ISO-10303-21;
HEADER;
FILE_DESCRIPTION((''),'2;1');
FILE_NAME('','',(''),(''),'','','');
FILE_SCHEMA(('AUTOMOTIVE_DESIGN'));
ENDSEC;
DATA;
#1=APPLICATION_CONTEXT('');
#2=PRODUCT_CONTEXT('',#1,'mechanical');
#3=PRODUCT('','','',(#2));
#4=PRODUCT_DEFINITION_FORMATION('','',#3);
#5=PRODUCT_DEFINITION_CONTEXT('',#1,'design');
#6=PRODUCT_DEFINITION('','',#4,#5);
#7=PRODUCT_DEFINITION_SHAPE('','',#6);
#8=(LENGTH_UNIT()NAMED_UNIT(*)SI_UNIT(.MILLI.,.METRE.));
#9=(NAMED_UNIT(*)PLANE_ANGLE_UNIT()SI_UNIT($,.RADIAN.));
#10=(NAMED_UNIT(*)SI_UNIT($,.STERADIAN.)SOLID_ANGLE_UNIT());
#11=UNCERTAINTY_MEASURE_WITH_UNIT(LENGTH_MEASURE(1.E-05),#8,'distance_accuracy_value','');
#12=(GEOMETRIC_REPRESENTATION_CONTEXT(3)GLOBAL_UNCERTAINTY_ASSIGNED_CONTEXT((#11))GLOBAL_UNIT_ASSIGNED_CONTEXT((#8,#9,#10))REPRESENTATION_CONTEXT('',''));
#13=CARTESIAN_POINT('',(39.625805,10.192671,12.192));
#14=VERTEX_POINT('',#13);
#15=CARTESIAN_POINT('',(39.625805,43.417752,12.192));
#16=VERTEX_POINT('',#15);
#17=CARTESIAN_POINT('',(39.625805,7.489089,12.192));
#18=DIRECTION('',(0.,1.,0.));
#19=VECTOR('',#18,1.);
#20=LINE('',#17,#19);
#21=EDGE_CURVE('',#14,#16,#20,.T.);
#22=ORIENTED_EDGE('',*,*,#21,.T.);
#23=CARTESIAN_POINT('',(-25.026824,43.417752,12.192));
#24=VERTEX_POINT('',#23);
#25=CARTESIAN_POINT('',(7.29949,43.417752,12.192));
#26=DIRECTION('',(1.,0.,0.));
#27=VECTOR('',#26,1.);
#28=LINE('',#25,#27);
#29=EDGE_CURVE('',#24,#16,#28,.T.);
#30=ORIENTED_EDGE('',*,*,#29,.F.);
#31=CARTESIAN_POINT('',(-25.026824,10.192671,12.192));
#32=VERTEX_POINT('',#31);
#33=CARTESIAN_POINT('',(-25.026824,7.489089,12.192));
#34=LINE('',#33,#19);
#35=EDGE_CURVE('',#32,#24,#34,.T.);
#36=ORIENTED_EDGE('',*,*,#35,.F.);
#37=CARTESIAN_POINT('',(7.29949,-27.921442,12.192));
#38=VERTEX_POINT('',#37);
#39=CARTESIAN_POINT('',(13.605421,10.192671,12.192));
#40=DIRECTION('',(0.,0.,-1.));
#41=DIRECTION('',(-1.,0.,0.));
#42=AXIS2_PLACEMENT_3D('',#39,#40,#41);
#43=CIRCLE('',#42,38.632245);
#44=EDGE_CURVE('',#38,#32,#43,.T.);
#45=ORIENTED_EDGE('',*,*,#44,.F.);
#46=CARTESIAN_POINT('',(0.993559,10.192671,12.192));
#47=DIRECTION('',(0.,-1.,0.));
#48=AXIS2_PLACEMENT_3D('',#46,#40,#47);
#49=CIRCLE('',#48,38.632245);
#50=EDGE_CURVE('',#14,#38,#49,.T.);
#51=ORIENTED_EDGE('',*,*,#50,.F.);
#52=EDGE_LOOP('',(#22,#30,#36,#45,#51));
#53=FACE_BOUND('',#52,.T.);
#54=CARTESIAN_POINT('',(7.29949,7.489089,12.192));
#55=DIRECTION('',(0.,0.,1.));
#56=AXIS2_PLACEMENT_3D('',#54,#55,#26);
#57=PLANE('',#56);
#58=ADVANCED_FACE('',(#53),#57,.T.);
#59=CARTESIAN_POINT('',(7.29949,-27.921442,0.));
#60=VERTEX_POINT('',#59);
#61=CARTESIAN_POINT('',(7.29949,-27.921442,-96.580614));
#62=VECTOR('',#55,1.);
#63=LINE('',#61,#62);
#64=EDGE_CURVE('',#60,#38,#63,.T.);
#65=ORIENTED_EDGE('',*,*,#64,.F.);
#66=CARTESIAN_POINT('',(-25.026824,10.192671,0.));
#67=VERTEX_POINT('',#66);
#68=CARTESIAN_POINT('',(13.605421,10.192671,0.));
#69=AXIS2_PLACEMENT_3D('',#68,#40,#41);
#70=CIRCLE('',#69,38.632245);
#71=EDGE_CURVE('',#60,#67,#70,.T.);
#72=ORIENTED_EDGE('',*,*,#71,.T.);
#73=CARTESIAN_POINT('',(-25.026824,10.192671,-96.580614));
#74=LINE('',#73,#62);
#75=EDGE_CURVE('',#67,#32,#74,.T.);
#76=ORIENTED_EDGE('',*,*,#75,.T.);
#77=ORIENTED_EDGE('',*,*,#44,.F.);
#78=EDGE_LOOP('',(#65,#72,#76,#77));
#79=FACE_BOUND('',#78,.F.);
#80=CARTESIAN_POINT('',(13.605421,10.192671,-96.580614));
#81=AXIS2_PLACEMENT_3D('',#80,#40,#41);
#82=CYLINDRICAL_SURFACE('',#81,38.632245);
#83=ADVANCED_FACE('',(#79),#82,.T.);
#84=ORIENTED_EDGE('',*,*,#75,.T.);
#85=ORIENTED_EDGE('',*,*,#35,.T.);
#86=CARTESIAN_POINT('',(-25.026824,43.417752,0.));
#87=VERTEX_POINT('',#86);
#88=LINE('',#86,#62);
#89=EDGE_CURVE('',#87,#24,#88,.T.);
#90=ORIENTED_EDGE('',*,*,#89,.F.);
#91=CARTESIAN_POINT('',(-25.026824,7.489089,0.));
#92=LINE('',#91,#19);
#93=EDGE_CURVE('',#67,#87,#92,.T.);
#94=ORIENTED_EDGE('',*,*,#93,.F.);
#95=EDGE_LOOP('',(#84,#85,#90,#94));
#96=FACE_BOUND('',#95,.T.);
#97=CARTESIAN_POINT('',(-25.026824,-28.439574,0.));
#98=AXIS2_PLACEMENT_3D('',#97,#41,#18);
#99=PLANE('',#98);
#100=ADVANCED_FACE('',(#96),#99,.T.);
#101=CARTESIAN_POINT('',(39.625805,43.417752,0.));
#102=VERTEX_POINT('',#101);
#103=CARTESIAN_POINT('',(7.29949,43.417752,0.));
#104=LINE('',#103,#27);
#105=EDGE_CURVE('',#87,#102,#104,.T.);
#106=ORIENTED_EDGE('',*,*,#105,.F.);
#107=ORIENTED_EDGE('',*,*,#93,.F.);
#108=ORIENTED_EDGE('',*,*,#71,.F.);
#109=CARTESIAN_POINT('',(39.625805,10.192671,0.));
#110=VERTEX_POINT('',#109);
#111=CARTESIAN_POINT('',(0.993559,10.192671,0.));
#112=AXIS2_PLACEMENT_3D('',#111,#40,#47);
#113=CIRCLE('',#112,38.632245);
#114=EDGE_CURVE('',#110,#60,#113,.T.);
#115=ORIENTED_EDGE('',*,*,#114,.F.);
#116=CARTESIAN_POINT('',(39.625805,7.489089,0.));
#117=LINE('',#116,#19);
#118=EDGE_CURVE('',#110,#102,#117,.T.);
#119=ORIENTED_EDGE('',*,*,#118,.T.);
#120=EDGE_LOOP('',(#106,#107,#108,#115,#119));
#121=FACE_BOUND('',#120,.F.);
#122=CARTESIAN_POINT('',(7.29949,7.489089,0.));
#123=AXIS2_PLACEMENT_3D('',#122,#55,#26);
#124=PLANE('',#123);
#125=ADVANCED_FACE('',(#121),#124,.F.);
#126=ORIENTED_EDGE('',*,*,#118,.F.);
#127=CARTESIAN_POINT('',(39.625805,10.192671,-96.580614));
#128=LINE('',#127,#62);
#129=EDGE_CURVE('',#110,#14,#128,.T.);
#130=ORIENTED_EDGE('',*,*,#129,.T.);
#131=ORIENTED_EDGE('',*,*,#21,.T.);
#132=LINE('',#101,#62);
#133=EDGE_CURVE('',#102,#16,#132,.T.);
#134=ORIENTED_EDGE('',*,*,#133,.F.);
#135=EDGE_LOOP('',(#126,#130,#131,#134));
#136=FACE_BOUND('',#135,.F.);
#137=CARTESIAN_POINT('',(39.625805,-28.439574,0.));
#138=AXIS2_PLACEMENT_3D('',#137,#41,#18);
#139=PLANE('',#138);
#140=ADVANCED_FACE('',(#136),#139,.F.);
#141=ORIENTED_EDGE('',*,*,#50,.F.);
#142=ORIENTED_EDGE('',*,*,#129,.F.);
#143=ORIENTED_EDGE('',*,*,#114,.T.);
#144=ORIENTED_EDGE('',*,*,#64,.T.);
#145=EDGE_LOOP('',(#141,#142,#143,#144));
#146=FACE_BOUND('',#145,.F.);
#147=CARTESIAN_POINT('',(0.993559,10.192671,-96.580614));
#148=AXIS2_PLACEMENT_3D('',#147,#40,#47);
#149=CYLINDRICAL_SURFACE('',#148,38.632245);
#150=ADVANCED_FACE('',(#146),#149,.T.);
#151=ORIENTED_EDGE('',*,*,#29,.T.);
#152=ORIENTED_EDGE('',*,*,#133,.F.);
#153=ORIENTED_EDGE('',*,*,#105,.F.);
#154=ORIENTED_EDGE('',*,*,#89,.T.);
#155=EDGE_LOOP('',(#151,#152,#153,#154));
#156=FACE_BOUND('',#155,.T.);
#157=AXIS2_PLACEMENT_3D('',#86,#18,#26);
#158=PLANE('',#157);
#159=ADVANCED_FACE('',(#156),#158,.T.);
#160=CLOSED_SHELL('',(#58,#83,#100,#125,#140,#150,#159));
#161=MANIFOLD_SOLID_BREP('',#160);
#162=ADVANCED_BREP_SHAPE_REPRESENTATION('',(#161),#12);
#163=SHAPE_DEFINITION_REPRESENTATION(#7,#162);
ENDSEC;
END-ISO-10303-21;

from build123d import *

# Parameters (mm, degrees)
F0_W        = 64.6526291966
F0_H        = 71.8573257327
F1_DEPTH    = 12.192
F2_T1_DEPTH = 205.3532271255


# Not quite as in the source:
# - a fillet or chamfer that OpenCascade refuses, or shapes differently, is made with other operations: its cross-section is extruded or revolved along the edge and cut away or added


with BuildPart() as f1:
    # F0 (on Top) → F1 (new body)
    with BuildSketch(Plane.XY):
        with Locations((7.299490273, 7.4890889227)):
            Rectangle(F0_W, F0_H)
    extrude(amount=F1_DEPTH)

    # F2: fillet of radius 38.6322454251 on 2 edges, made by hand

    # F2_s2 → F2_t1 (cut)
    with BuildSketch(Plane.XY.offset(-96.5806135627)):
        with BuildLine():
            ThreePointArc((0.9935594462, -28.4395739436), (28.3106821588, -17.1244512311), (39.6258048713, 10.1926714815))
            Line((39.6258048713, 10.1926714815), (39.6258048713, -28.4395739436))
            Line((39.6258048713, -28.4395739436), (0.9935594462, -28.4395739436))
        make_face()
        with BuildLine():
            ThreePointArc((-25.0268243253, 10.1926714815), (-13.7117016128, -17.1244512311), (13.6054210998, -28.4395739436))
            Line((13.6054210998, -28.4395739436), (-25.0268243253, -28.4395739436))
            Line((-25.0268243253, -28.4395739436), (-25.0268243253, 10.1926714815))
        make_face()
    extrude(amount=F2_T1_DEPTH, mode=Mode.SUBTRACT)


solid = f1.part
